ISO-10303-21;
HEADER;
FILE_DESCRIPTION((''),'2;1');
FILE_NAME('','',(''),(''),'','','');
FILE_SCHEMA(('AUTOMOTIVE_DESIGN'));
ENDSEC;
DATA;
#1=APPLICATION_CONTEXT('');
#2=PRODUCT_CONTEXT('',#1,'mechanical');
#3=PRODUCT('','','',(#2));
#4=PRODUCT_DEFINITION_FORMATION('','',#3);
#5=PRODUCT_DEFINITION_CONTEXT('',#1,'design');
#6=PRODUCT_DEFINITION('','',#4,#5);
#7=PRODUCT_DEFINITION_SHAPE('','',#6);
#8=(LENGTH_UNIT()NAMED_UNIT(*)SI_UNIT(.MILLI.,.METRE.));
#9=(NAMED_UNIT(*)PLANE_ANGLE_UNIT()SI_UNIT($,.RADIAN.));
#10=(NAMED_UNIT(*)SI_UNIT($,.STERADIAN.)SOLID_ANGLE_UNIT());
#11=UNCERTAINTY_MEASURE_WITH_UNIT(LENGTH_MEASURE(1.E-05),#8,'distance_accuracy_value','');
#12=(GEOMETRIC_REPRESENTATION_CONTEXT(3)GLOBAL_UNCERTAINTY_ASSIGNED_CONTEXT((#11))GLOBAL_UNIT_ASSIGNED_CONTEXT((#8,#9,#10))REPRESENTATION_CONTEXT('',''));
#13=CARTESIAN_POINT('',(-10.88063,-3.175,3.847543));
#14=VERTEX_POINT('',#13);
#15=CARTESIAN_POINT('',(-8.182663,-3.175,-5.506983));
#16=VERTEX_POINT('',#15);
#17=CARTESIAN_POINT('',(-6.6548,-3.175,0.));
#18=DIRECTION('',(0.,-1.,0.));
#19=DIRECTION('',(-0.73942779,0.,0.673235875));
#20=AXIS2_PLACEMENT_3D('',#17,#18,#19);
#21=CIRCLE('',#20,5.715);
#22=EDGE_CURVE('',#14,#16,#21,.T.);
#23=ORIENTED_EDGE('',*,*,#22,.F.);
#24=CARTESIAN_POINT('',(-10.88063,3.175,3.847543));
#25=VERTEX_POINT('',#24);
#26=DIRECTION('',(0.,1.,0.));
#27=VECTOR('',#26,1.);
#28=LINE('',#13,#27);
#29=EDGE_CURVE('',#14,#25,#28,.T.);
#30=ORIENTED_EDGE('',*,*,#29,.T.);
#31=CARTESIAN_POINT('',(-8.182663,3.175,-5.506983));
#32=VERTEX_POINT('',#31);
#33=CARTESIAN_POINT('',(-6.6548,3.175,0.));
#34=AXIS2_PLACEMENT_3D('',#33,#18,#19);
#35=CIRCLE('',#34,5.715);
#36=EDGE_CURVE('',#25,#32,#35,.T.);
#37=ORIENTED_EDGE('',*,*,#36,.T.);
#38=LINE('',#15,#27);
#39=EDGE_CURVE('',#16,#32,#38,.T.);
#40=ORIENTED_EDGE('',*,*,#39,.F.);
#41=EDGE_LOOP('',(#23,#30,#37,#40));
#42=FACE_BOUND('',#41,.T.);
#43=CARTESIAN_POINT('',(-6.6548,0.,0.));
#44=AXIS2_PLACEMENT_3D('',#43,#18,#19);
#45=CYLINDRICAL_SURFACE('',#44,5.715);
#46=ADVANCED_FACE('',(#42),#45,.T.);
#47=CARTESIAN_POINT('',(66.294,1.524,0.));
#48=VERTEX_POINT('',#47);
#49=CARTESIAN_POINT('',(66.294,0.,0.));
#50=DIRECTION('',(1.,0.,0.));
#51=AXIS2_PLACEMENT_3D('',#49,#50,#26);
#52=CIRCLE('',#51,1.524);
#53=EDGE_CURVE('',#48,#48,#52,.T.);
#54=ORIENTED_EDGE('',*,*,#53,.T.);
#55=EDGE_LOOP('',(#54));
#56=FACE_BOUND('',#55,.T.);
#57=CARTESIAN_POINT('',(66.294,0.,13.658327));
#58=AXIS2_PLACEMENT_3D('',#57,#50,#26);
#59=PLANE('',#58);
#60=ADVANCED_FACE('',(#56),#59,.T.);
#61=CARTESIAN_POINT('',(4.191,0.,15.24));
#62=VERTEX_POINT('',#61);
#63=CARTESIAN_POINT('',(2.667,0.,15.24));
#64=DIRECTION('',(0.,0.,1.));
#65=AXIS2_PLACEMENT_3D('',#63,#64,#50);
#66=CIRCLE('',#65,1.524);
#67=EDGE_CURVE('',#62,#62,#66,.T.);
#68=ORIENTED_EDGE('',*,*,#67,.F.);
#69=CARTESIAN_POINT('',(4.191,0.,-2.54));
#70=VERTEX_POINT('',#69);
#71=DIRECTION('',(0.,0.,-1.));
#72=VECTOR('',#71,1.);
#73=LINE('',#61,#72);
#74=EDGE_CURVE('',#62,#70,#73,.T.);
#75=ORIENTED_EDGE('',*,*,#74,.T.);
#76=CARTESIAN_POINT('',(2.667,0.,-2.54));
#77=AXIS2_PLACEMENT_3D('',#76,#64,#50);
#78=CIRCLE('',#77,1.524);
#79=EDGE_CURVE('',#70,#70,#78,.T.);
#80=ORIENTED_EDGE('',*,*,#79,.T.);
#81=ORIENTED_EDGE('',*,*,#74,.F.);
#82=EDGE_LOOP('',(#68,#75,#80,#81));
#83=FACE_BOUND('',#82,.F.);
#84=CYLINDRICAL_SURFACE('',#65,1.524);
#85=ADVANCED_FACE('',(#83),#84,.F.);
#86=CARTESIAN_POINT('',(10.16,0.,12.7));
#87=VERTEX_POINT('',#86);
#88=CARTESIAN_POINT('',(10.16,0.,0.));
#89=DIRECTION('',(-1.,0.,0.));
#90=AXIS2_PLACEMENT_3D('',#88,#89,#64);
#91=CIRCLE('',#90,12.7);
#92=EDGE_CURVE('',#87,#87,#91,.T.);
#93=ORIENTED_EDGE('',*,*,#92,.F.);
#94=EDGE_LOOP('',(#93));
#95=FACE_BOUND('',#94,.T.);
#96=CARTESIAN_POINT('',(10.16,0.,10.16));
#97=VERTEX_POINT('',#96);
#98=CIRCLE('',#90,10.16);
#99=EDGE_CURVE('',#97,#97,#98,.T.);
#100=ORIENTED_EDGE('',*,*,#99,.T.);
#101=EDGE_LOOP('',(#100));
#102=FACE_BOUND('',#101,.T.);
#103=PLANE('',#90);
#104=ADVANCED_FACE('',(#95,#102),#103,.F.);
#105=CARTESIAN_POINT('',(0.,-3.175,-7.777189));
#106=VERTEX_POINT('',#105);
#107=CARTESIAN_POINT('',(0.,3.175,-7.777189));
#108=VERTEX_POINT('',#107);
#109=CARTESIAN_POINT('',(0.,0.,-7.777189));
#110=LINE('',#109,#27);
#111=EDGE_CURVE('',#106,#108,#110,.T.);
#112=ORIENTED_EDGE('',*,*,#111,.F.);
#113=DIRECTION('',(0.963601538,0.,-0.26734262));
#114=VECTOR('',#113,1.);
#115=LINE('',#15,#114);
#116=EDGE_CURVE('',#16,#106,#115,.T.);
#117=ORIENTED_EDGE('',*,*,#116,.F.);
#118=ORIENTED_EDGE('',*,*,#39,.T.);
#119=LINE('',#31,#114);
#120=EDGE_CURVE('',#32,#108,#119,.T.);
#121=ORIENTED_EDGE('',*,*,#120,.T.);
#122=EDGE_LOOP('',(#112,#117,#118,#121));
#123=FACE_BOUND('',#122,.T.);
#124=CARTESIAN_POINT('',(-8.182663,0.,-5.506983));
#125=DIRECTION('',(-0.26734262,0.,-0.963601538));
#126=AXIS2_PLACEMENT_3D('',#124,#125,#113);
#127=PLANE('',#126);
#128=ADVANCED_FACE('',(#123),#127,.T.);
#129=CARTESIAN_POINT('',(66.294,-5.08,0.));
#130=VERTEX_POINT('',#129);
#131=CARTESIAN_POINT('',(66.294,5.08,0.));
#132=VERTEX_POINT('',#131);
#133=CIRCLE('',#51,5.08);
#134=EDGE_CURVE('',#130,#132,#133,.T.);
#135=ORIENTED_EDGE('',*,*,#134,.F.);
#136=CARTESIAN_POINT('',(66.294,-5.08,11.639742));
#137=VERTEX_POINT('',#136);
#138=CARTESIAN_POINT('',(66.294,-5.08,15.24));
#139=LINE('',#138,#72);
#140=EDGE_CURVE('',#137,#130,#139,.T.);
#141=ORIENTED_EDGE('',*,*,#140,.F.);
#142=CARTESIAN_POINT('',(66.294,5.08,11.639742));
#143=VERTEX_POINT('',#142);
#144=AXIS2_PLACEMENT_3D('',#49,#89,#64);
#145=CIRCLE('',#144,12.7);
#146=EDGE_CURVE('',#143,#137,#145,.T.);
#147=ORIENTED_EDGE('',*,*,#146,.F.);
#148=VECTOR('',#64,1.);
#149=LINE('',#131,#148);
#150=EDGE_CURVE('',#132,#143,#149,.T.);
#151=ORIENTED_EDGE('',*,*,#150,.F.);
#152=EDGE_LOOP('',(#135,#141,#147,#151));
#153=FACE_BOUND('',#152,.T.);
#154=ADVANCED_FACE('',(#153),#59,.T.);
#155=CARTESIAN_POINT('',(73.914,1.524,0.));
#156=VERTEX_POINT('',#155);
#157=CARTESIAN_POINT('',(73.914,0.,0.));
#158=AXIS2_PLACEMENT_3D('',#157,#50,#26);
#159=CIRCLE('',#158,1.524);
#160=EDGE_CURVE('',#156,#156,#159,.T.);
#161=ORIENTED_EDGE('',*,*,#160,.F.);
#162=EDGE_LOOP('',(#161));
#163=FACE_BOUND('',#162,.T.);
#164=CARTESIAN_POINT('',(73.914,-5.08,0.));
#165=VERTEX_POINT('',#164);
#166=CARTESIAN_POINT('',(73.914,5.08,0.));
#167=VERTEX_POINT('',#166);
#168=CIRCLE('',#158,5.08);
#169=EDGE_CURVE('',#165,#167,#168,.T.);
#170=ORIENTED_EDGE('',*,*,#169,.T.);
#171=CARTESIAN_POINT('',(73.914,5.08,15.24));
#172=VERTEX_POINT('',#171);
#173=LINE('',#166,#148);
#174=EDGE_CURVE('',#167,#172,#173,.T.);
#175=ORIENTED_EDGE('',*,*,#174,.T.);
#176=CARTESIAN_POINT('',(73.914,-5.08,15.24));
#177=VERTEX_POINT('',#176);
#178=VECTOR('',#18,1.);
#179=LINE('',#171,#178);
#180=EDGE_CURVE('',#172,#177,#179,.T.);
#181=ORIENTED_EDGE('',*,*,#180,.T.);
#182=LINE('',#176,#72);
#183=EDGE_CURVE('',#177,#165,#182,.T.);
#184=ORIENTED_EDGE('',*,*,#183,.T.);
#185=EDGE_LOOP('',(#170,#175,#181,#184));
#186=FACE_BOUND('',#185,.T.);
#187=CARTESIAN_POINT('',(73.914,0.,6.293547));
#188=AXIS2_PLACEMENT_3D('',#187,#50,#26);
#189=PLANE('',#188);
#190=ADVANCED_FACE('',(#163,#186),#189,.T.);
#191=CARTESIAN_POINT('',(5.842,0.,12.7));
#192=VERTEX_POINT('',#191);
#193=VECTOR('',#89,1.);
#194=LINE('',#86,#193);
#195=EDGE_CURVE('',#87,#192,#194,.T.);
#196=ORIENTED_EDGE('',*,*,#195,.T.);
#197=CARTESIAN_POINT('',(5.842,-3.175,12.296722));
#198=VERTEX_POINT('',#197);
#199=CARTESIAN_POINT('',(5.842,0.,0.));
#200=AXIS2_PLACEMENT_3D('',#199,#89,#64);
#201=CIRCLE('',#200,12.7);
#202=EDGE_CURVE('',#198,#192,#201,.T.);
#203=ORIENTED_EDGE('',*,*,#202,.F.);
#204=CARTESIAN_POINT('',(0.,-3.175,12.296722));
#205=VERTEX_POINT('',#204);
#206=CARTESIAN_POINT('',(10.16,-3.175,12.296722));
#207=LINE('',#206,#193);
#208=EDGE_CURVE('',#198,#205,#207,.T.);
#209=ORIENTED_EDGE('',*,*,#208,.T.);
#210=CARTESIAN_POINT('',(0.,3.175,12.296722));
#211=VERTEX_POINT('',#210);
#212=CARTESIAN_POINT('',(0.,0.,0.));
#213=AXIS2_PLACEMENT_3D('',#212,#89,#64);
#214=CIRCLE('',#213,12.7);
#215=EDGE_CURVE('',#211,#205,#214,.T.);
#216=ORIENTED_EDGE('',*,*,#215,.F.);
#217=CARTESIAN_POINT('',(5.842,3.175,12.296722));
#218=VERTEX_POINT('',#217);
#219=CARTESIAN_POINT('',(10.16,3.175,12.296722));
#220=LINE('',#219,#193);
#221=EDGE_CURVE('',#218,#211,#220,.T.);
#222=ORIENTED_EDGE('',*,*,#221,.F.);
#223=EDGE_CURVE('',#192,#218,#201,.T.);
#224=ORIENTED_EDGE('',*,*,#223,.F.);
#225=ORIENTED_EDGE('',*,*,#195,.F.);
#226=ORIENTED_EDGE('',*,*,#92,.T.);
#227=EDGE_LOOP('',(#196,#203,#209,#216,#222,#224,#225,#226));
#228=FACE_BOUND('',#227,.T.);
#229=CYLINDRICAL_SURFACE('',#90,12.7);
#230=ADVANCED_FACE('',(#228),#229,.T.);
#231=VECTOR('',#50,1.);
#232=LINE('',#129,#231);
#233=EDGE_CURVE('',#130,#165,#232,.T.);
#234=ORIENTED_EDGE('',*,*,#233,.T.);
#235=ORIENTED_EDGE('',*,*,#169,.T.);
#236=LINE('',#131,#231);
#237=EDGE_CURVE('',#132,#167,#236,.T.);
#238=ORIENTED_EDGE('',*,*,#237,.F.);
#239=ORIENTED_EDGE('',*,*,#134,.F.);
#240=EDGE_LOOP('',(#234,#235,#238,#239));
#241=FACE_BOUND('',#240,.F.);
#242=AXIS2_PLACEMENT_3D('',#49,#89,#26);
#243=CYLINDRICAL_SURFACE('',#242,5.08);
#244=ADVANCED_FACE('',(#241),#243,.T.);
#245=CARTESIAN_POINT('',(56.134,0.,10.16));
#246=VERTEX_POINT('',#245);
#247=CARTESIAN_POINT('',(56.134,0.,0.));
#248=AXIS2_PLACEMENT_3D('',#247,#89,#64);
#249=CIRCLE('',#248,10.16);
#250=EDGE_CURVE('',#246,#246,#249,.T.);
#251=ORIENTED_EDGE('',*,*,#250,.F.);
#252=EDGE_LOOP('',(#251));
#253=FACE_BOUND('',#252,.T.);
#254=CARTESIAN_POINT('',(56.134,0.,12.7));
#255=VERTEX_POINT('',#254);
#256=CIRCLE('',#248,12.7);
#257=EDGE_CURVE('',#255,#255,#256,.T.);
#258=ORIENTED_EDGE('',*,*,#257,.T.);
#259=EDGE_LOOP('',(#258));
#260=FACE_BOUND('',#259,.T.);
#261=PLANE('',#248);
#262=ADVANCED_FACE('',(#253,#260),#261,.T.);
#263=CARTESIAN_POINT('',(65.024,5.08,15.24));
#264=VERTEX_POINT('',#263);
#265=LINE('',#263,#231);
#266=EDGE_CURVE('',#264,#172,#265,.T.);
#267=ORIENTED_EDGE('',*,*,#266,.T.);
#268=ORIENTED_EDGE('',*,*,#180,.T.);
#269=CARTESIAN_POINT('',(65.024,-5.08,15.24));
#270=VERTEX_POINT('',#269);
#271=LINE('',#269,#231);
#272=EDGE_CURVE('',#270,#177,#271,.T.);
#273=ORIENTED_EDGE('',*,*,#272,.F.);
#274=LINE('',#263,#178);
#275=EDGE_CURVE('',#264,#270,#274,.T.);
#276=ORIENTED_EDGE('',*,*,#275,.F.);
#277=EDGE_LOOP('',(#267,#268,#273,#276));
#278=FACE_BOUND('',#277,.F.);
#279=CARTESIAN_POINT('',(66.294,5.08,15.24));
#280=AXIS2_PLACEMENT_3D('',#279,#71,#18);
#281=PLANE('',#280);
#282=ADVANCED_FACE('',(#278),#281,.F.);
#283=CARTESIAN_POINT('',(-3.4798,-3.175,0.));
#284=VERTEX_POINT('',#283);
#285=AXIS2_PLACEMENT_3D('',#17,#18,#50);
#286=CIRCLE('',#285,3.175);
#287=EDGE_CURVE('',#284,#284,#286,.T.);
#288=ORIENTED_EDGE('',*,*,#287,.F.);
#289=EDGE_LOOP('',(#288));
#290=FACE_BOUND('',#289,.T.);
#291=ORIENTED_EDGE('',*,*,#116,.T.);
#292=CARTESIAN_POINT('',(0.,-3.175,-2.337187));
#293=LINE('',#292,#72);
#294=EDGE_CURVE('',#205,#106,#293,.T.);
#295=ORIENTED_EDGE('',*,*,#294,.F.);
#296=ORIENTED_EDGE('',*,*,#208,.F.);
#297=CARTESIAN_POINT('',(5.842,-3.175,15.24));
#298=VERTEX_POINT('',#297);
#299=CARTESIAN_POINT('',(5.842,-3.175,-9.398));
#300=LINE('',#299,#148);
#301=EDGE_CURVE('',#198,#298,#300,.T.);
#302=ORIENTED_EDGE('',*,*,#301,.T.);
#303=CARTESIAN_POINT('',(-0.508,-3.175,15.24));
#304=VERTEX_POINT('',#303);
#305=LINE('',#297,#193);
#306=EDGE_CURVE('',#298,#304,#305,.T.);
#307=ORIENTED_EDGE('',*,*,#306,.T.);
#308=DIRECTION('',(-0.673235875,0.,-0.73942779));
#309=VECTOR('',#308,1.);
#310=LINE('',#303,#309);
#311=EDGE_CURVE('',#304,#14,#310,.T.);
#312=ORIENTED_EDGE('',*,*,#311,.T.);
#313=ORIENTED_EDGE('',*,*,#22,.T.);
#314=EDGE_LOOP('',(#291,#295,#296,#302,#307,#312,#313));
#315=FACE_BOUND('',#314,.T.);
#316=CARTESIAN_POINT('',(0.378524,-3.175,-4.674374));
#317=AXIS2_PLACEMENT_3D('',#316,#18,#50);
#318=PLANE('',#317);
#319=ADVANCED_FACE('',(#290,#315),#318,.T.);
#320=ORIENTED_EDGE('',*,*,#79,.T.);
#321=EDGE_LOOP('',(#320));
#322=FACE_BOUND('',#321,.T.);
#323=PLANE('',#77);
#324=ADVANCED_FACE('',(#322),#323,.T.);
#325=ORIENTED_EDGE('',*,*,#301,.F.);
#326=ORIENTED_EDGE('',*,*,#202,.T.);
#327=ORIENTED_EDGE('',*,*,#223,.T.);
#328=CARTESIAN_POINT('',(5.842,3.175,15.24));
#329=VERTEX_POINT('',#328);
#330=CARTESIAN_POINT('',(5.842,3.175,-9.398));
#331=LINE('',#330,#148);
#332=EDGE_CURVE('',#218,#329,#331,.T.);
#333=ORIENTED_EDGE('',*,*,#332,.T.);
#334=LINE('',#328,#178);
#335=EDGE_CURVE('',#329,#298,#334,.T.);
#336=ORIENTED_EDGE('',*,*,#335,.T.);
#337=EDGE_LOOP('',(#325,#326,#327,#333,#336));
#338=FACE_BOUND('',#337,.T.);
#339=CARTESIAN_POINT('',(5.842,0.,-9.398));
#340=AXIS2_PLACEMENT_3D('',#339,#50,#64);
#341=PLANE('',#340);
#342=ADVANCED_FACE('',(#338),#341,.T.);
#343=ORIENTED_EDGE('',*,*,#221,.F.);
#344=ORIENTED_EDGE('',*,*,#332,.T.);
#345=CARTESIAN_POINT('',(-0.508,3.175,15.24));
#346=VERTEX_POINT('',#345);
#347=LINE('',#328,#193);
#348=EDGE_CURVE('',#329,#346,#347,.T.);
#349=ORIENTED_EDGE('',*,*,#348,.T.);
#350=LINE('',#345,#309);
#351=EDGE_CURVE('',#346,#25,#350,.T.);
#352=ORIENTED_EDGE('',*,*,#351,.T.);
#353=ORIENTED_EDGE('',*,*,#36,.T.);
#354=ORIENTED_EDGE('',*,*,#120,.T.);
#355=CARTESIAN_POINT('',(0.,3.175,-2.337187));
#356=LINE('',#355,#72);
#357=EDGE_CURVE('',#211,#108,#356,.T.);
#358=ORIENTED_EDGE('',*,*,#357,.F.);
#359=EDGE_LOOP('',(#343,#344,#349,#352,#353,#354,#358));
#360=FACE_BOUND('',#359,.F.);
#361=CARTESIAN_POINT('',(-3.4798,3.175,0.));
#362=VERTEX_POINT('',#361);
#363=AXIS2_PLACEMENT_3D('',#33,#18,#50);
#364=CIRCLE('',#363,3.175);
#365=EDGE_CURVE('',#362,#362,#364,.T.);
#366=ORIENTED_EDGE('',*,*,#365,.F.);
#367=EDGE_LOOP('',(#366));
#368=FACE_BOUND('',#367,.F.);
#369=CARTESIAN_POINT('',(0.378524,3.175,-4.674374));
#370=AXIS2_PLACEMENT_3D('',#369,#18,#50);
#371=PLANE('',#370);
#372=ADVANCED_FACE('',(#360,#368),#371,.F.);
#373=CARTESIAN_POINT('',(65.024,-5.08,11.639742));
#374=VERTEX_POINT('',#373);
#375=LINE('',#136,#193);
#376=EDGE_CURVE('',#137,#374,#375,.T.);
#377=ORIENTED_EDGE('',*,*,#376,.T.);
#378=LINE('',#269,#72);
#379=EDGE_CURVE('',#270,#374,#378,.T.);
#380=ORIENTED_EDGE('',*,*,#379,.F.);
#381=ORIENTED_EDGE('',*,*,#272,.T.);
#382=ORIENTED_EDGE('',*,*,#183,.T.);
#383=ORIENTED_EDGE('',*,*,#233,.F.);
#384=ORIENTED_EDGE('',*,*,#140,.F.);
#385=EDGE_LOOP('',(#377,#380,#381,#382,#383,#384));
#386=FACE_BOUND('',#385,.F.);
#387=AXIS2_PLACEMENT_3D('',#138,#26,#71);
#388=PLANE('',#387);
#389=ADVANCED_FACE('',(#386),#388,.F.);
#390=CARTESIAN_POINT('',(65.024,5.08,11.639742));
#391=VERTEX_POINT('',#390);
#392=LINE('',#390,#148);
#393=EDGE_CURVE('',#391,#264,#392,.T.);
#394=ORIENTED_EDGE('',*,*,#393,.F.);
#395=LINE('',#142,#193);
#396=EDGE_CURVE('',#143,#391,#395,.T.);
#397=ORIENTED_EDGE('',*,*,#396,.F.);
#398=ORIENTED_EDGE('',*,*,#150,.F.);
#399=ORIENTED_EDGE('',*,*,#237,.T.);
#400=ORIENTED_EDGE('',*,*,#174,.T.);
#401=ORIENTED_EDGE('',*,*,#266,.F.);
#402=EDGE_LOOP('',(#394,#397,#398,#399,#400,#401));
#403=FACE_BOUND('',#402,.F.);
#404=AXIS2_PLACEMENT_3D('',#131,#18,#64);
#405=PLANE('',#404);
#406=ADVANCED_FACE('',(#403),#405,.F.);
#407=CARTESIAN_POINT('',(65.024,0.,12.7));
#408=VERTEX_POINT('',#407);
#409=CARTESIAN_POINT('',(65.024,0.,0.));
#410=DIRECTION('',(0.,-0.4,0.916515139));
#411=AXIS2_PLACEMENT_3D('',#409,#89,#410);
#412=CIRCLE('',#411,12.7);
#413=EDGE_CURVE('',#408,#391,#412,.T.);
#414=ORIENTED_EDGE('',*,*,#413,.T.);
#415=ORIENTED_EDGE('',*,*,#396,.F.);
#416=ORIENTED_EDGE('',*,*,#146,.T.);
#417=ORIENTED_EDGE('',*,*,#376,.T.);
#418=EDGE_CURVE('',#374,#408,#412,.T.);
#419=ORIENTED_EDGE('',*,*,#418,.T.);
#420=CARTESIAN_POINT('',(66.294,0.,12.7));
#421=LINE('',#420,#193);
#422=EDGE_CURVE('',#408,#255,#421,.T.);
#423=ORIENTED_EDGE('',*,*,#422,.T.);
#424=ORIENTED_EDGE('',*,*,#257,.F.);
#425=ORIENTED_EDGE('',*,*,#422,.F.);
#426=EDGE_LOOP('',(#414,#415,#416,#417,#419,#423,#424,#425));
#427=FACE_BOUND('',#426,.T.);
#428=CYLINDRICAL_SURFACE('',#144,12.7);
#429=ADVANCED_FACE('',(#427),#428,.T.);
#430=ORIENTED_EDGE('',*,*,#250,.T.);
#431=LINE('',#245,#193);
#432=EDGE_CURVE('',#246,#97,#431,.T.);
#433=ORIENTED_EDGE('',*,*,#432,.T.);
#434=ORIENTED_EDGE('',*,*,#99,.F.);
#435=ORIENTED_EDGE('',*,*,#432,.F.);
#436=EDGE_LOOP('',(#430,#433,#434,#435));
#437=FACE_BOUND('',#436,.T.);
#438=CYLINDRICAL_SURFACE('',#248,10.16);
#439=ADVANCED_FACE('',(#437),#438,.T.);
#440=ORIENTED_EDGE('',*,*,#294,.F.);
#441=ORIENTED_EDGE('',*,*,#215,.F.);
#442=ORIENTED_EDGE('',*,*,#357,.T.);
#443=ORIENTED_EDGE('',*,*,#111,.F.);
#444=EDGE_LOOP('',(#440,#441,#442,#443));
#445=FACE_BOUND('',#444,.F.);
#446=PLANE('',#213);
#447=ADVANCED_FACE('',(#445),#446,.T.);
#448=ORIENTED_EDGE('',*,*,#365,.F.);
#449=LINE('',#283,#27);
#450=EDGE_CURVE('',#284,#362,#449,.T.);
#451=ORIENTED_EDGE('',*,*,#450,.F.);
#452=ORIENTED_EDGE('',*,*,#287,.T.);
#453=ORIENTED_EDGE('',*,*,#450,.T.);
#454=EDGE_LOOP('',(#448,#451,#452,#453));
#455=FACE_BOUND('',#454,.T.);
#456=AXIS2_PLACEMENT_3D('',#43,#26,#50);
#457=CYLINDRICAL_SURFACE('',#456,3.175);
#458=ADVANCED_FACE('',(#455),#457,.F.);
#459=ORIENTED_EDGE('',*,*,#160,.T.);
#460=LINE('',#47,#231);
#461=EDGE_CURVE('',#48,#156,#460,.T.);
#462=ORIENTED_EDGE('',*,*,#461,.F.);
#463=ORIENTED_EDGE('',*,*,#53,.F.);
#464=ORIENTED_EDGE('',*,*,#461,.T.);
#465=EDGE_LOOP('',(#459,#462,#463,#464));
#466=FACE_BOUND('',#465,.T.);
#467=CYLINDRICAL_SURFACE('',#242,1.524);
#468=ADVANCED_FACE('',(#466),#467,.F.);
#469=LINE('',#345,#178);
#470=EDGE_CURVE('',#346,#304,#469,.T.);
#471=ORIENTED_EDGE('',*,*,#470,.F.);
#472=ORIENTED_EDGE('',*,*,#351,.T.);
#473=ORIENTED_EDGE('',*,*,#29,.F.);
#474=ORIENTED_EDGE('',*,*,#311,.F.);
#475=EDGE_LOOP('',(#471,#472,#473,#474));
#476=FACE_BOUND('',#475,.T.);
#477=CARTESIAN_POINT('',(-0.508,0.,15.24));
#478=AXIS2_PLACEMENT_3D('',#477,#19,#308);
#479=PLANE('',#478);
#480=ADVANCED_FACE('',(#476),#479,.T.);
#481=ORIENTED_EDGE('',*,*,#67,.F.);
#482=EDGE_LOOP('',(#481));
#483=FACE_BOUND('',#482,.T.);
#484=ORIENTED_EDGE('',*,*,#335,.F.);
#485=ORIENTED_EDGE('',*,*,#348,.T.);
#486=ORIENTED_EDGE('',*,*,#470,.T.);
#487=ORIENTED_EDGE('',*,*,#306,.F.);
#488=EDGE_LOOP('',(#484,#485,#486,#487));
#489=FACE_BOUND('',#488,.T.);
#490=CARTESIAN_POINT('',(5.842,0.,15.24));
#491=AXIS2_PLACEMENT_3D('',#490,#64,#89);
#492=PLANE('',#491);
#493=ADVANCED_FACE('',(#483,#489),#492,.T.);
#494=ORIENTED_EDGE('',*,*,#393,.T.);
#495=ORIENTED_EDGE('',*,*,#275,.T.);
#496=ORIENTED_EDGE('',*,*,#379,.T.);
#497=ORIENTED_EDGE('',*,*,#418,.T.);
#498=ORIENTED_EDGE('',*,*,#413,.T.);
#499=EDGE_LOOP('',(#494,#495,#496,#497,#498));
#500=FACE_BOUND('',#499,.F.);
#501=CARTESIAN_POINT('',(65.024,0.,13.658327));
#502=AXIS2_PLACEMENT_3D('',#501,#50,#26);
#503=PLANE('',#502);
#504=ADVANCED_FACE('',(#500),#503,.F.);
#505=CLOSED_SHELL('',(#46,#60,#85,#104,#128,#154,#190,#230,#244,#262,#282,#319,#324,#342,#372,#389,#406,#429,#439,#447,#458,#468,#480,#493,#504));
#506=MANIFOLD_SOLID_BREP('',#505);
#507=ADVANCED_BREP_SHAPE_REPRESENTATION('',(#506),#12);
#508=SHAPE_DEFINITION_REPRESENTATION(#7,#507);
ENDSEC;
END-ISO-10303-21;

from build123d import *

# Parameters (mm, degrees)
F0_W      = 5.842
F0_H      = 12.7
F0_R      = 3.175
F2_DEPTH  = 3.175
F5_DEPTH  = 1.27
F4_R      = 1.524
F6_DEPTH  = 7.62
F10_R     = 1.524
F11_DEPTH = 17.78


# Not quite as in the source:
# - a feature of the source that left no trace in its solid (it failed there, or was rolled back) is left out


with BuildPart() as f1:
    # F0 (on Front) → F1 (revolve)
    with BuildSketch(Plane.XZ):
        Polygon((5.842, 12.7), (5.842, 0), (66.294, 0), (66.294, 12.7), (56.134, 12.7), (56.134, 10.16), (10.16, 10.16), (10.16, 12.7), align=None)
        with Locations((2.921, 6.35)):
            Rectangle(F0_W, F0_H)
    revolve(axis=Axis((33.147, 0, 0), (-1, 0, 0)))

    # F0 (on Front) → F2 (join, symmetric)
    with BuildSketch(Plane.XZ):
        with BuildLine():
            Line((5.842, 0), (0, 0))
            Line((0, 0), (-0.9398, 0))
            ThreePointArc((-0.9398, 0), (-3.1957909266, -4.5493385486), (-8.1826630726, -5.5069827884))
            Line((-8.1826630726, -5.5069827884), (5.842, -9.398))
            Line((5.842, -9.398), (5.842, 0))
        make_face()
        with BuildLine():
            Line((-0.9398, 0), (0, 0))
            Line((0, 0), (0, 12.7))
            Line((0, 12.7), (5.842, 12.7))
            Line((5.842, 12.7), (5.842, 15.24))
            Line((5.842, 15.24), (-0.508, 15.24))
            Line((-0.508, 15.24), (-10.8806298187, 3.8475430269))
            ThreePointArc((-10.8806298187, 3.8475430269), (-4.5919612295, 5.3297205562), (-0.9398, 0))
        make_face()
        with BuildLine():
            ThreePointArc((-8.1826630726, -5.5069827884), (-3.1957909266, -4.5493385486), (-0.9398, 0))
            ThreePointArc((-0.9398, 0), (-4.5919612295, 5.3297205562), (-10.8806298187, 3.8475430269))
            ThreePointArc((-10.8806298187, 3.8475430269), (-12.1459778134, -1.5837270034), (-8.1826630726, -5.5069827884))
        make_face()
        with Locations((-6.6548, 0)):
            Circle(F0_R, mode=Mode.SUBTRACT)
        with Locations((2.921, 6.35)):
            Rectangle(F0_W, F0_H)
    extrude(amount=F2_DEPTH, both=True)

    # F3: union 

    # F4 (on face) → F5 (join)
    with BuildSketch(Plane.YZ.offset(66.294)):
        with BuildLine():
            ThreePointArc((-5.08, 11.6397422652), (0, 12.7), (5.08, 11.6397422652))
            Line((5.08, 11.6397422652), (5.08, 15.24))
            Line((5.08, 15.24), (-5.08, 15.24))
            Line((-5.08, 15.24), (-5.08, 11.6397422652))
        make_face()
    extrude(amount=-F5_DEPTH)

    # F4 (on face) → F6 (join)
    with BuildSketch(Plane.YZ.offset(66.294)):
        with BuildLine():
            Line((5.08, 0), (5.08, 11.6397422652))
            ThreePointArc((5.08, 11.6397422652), (0, 12.7), (-5.08, 11.6397422652))
            Line((-5.08, 11.6397422652), (-5.08, 0))
            ThreePointArc((-5.08, 0), (0, 5.08), (5.08, 0))
        make_face()
        with BuildLine():
            ThreePointArc((-5.08, 11.6397422652), (0, 12.7), (5.08, 11.6397422652))
            Line((5.08, 11.6397422652), (5.08, 15.24))
            Line((5.08, 15.24), (-5.08, 15.24))
            Line((-5.08, 15.24), (-5.08, 11.6397422652))
        make_face()
        with BuildLine():
            ThreePointArc((-5.08, 0), (0, -5.08), (5.08, 0))
            ThreePointArc((5.08, 0), (0, 5.08), (-5.08, 0))
        make_face()
        Circle(F4_R, mode=Mode.SUBTRACT)
    extrude(amount=F6_DEPTH)

    # F7: union 

    # F10 (on face) → F11 (cut)
    with BuildSketch(Plane.XY.offset(15.24)):
        with Locations((2.667, 0)):
            Circle(F10_R)
    extrude(amount=-F11_DEPTH, mode=Mode.SUBTRACT)


solid = f1.part
